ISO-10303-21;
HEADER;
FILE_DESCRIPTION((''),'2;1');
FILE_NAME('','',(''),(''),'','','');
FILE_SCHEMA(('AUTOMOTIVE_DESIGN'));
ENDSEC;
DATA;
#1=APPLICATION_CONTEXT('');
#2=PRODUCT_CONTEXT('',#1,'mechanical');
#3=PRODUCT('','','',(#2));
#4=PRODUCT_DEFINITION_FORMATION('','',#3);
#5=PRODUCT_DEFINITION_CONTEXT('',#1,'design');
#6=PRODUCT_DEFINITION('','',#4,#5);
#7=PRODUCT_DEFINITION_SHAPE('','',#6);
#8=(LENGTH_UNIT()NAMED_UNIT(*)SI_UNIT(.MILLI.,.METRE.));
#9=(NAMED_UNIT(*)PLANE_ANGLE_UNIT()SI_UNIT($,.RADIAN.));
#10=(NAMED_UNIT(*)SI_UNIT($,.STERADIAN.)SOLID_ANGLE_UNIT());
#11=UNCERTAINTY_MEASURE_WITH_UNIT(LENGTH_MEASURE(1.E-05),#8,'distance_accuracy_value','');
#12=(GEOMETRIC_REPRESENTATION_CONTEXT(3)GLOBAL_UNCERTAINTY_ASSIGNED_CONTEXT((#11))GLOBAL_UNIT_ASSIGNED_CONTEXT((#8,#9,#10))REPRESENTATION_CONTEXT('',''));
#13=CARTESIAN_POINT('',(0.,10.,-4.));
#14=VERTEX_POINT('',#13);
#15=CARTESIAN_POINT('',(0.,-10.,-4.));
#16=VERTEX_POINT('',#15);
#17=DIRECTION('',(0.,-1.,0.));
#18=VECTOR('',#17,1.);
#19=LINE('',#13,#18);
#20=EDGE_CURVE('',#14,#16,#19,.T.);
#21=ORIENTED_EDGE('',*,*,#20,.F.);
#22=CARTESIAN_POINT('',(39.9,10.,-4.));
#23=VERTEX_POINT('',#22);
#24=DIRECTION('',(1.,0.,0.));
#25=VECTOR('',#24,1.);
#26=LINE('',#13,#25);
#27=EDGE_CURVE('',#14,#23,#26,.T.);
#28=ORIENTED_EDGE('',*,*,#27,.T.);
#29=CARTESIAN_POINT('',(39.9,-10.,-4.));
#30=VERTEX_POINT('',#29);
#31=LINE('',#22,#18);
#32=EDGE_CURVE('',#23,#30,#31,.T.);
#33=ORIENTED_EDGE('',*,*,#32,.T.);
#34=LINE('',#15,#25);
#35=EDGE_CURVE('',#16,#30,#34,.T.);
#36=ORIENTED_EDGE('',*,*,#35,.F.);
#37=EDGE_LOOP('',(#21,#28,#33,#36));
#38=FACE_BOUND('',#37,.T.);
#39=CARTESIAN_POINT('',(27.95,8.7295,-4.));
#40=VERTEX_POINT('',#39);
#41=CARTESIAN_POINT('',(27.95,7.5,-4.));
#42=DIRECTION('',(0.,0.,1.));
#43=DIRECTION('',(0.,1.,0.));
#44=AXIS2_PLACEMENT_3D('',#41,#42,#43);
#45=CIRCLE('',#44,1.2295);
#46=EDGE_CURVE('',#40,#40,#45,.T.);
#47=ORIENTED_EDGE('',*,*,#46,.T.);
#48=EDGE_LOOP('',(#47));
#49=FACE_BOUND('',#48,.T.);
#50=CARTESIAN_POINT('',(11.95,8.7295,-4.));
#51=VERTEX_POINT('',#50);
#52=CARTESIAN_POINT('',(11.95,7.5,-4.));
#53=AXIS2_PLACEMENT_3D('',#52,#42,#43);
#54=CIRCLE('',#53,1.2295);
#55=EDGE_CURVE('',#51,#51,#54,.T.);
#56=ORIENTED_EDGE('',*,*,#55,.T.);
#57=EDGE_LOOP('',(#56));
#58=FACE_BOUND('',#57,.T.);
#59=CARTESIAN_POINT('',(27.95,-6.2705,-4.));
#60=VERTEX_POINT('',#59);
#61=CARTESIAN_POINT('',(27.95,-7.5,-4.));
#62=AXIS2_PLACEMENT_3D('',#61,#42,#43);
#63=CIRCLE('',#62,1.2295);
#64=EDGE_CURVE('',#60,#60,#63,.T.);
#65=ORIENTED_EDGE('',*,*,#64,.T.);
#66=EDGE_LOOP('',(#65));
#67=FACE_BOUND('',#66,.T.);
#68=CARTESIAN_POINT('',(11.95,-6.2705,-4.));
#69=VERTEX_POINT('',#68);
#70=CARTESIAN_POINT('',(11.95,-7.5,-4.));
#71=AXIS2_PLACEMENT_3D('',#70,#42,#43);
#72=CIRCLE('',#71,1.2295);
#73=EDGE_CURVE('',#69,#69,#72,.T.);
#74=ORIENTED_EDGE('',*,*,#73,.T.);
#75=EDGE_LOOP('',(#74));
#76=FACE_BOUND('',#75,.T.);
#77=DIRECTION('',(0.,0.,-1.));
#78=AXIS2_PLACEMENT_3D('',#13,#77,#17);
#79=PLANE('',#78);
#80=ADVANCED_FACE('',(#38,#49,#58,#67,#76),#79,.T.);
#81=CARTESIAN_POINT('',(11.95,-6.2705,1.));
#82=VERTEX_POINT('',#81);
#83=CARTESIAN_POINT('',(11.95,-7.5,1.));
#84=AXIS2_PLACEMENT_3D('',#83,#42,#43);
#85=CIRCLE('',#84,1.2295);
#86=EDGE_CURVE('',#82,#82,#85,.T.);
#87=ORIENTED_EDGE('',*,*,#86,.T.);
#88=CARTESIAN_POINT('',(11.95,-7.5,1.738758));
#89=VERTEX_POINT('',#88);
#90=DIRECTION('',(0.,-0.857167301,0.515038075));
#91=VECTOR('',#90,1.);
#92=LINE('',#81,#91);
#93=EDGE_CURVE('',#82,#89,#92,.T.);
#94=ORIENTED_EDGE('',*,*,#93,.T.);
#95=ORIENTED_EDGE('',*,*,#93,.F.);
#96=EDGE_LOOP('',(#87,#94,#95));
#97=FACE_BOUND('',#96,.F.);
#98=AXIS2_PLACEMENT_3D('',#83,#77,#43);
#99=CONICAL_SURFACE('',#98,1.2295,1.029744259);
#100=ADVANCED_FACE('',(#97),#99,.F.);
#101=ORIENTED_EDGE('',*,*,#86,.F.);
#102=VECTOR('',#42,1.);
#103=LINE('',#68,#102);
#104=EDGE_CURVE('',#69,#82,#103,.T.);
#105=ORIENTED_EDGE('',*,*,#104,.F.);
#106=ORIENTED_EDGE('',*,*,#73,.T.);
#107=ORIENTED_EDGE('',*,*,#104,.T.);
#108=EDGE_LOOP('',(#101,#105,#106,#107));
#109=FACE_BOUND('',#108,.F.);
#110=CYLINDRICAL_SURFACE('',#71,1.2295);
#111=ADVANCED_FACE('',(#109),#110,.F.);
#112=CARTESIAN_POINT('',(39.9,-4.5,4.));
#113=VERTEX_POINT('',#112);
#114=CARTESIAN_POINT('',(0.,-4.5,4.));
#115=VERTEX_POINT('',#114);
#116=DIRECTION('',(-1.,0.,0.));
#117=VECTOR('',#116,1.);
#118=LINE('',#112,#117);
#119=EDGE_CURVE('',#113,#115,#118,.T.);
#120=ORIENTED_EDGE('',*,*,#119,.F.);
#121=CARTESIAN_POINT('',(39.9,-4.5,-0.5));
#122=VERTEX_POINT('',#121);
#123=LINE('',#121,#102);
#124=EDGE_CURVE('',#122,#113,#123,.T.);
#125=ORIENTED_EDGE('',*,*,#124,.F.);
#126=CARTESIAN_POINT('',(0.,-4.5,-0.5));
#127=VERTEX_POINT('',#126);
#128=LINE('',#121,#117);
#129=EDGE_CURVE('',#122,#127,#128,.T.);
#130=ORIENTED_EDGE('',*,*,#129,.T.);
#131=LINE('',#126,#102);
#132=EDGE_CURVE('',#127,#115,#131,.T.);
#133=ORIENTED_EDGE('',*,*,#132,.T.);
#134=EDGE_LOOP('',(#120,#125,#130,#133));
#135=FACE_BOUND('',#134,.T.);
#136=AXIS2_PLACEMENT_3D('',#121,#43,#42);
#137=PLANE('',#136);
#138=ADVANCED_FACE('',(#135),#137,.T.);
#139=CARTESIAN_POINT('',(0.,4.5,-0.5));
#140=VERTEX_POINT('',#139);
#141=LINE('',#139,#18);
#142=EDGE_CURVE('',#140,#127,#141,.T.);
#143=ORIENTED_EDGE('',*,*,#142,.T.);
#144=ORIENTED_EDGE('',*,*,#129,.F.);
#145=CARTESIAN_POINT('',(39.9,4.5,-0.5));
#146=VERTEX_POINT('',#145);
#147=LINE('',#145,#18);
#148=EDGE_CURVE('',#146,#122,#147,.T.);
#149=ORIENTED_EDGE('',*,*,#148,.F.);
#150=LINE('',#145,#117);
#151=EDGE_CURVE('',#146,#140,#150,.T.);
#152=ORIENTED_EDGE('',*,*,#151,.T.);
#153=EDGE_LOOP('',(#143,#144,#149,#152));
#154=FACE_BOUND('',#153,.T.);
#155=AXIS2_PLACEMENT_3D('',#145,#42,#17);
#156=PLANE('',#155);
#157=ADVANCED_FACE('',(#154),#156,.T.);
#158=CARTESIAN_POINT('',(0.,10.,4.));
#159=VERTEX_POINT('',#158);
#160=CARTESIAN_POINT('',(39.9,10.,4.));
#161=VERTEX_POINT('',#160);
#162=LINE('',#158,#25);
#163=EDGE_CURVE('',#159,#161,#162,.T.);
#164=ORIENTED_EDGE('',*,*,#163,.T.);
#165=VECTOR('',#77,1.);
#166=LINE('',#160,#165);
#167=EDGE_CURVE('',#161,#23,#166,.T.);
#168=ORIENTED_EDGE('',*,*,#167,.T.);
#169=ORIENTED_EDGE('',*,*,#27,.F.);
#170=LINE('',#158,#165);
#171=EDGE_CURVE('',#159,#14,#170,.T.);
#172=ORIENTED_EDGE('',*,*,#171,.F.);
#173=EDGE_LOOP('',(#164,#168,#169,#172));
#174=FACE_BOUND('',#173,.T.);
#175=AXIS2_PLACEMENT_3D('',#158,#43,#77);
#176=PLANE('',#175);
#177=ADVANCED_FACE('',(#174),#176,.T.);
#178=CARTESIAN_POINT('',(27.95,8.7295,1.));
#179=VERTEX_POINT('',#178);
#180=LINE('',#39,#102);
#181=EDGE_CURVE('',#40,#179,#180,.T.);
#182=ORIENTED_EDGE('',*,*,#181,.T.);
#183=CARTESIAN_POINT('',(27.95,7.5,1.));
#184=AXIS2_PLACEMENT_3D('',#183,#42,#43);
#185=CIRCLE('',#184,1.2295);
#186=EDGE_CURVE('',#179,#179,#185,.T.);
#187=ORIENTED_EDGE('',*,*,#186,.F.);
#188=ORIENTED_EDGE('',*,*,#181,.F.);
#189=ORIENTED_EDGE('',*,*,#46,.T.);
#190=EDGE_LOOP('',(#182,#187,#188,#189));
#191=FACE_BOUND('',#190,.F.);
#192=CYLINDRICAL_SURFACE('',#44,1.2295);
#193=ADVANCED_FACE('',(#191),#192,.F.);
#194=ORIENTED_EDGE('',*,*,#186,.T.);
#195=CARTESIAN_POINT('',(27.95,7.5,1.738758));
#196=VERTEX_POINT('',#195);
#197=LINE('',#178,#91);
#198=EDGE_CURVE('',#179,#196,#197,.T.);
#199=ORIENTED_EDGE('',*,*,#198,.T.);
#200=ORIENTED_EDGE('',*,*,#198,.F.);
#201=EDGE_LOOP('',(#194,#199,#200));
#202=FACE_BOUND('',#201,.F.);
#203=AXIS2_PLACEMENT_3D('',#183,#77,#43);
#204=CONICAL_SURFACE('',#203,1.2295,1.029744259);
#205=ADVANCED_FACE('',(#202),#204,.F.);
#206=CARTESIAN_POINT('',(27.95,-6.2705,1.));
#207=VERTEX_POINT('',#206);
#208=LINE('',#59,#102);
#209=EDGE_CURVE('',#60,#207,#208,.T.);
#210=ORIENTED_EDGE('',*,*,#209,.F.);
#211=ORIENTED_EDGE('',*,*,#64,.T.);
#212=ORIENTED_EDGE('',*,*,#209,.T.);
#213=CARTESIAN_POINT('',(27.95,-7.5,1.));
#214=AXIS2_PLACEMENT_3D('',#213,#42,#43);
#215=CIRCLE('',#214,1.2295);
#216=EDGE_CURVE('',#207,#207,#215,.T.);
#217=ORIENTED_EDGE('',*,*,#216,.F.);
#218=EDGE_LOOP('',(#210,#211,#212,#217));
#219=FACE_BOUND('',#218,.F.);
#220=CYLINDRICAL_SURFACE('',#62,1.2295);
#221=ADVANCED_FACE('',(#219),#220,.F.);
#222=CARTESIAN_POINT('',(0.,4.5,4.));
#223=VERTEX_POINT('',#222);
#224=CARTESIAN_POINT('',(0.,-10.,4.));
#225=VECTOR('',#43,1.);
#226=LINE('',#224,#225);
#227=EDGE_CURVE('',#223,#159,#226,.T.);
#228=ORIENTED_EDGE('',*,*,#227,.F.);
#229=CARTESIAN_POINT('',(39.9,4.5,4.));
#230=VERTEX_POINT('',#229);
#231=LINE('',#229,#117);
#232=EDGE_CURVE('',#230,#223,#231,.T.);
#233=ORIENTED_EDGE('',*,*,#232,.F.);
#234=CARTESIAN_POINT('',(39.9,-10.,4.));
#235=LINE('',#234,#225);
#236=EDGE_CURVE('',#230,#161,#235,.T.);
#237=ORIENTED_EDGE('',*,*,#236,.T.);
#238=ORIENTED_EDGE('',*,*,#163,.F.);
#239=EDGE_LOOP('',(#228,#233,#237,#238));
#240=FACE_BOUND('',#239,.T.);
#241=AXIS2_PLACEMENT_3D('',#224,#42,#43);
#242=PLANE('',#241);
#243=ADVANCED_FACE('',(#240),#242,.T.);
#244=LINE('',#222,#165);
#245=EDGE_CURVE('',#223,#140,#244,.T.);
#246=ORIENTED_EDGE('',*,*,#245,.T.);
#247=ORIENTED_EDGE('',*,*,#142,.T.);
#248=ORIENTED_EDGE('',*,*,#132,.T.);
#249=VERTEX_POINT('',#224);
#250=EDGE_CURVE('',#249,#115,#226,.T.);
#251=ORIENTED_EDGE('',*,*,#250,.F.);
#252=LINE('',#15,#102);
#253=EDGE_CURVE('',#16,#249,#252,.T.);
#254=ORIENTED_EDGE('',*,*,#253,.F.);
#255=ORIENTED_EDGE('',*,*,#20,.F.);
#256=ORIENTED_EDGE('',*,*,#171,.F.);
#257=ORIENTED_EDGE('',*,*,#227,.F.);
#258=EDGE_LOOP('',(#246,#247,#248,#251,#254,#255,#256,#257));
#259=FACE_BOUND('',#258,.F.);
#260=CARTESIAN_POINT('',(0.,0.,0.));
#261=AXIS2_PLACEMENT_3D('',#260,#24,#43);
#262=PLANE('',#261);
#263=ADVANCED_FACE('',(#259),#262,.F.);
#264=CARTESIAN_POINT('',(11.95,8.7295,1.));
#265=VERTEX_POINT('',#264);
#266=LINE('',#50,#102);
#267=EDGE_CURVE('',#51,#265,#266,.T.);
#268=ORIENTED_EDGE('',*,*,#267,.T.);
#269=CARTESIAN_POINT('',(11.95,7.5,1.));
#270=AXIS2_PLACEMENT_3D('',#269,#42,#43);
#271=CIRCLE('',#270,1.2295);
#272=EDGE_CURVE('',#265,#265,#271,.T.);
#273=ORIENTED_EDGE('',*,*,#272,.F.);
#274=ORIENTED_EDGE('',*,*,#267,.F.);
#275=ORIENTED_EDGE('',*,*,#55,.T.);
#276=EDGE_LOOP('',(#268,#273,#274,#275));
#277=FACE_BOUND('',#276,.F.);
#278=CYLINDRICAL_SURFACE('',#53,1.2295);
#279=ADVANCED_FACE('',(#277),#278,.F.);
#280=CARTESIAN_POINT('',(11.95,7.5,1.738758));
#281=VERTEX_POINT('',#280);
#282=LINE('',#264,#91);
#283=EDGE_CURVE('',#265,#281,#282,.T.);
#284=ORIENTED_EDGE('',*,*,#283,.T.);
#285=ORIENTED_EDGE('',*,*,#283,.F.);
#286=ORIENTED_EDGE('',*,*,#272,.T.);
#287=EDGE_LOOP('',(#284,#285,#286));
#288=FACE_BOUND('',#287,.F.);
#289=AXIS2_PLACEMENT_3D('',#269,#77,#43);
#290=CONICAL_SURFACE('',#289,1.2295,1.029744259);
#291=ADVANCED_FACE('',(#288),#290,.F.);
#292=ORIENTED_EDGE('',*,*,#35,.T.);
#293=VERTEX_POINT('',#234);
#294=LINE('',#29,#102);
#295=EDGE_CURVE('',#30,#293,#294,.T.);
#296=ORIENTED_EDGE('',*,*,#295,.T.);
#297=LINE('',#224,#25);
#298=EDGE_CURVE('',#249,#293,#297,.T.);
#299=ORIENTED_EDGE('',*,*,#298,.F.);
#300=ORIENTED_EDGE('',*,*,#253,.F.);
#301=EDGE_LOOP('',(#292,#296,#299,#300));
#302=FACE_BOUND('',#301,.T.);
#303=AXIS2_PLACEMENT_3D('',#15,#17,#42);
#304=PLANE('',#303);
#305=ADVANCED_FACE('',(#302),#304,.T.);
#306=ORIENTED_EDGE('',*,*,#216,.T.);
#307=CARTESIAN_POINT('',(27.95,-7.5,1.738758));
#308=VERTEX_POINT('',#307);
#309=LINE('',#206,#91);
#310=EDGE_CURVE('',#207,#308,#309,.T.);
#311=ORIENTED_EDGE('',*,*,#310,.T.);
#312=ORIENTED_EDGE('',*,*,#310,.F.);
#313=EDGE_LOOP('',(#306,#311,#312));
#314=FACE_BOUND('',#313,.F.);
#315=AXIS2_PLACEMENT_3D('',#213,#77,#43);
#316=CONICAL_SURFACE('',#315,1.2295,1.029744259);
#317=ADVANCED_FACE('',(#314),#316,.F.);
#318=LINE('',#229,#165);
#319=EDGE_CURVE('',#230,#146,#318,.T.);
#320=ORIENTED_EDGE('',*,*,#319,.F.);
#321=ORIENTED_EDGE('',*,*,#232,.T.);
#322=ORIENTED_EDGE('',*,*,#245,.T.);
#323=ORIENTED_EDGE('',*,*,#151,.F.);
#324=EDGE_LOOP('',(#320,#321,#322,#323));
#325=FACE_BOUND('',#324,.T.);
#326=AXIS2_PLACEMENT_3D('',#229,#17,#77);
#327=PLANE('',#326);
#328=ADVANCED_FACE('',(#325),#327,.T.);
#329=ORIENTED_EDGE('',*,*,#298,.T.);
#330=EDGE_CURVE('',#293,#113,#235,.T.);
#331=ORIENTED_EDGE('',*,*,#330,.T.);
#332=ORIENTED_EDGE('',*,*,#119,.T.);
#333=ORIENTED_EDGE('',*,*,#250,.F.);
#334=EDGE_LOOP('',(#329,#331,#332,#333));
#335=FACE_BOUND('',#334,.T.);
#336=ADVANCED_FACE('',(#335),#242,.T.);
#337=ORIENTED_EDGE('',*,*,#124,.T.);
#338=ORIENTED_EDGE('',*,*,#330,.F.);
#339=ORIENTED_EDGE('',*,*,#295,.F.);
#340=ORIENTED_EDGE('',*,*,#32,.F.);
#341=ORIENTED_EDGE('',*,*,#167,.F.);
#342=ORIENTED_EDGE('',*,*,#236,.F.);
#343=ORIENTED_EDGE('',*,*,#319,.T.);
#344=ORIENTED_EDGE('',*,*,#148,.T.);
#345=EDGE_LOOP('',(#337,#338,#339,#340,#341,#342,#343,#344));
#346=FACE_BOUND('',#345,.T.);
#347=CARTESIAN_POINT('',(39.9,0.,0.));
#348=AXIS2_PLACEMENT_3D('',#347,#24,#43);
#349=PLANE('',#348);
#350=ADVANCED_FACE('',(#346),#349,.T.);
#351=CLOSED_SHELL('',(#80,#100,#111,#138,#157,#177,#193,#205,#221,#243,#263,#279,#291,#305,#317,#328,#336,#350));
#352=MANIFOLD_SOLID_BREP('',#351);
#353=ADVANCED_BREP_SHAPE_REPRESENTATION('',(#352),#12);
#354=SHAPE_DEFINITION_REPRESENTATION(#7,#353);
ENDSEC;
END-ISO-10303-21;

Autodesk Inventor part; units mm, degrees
ref_plane "YZ Plane" through (0, 0, 0) normal (1, 0, 0) x (0, 1, 0)
ref_plane "XZ Plane" through (0, 0, 0) normal (0, 1, 0) x (-1, 0, 0)
ref_plane "XY Plane" through (0, 0, 0) normal (0, 0, 1) x (1, 0, 0)
sketch "Sketch1" plane through (0, 0, 0) normal (1, 0, 0) x (0, 1, 0)
  line L0 (-10, 4) -> (10, 4)
  line L1 (10, 4) -> (10, -4)
  line L2 (10, -4) -> (-10, -4)
  line L3 (-10, -4) -> (-10, 4)
  line L4 (-10, 4) -> (10, -4) construction
  line L5 (10, 4) -> (-10, -4) construction
  point P0 (0, 0)
  dimension "d0" = 8
  dimension "d1" = 20
extrude "Extrusion1" add sketch "Sketch1" along normal blind 39.9
sketch "Sketch2" plane through (39.9, 0, 0) normal (1, 0, 0) x (0, 0, -1)
  line L0 (-4, 10) -> (-4, -10) projected
  line L1 (-4, 4.5) -> (0.5, 4.5)
  line L2 (0.5, 4.5) -> (0.5, -4.5)
  line L3 (0.5, -4.5) -> (-4, -4.5)
  line L4 (-4, -4.5) -> (-4, 4.5)
  point P0 (0, 0)
  dimension "d4" = 9
  dimension "d5" = 4.5
  dimension "d6" = 4.5
extrude "Extrusion2" cut sketch "Sketch2" against normal blind 39.9
sketch "Sketch3" plane through (0, -10, -4) normal (0, 0, -1) x (-1, 0, 0)
  line L0 (0, 20) -> (0, 0) projected
  line L1 (0, 20) -> (-39.9, 20) projected
  line L2 (-39.9, 0) -> (-39.9, 20) projected
  line L3 (0, 0) -> (-39.9, 0) projected
  point P0 (0, 10)
  point P1 (-27.95, 17.5)
  point P2 (-27.95, 2.5)
  point P3 (-11.95, 2.5)
  point P4 (-11.95, 17.5)
  dimension "d9" = 16
  dimension "d10" = 39.9
  dimension "d11" = 11.95
  dimension "d12" = 15
  dimension "d13" = 7.5
hole "Hole1" at (27.95, 7.5, -4) at (27.95, -7.5, -4) at (11.95, -7.5, -4) at (11.95, 7.5, -4) direction (0, 0, 1) diameter 2.459 depth 5 tip angle 118 thread size "M3x0.5" class "6H" standard "ISO Metric profile"
equation "\"d5\" = 0.5 * d4"
equation "\"d11\" = 0.5 * d10 - 0.5 * d9"
equation "\"d13\" = 0.5 * d12"
properties part number "MGN9H" material "Stainless Steel AISI 440C, Welded"
